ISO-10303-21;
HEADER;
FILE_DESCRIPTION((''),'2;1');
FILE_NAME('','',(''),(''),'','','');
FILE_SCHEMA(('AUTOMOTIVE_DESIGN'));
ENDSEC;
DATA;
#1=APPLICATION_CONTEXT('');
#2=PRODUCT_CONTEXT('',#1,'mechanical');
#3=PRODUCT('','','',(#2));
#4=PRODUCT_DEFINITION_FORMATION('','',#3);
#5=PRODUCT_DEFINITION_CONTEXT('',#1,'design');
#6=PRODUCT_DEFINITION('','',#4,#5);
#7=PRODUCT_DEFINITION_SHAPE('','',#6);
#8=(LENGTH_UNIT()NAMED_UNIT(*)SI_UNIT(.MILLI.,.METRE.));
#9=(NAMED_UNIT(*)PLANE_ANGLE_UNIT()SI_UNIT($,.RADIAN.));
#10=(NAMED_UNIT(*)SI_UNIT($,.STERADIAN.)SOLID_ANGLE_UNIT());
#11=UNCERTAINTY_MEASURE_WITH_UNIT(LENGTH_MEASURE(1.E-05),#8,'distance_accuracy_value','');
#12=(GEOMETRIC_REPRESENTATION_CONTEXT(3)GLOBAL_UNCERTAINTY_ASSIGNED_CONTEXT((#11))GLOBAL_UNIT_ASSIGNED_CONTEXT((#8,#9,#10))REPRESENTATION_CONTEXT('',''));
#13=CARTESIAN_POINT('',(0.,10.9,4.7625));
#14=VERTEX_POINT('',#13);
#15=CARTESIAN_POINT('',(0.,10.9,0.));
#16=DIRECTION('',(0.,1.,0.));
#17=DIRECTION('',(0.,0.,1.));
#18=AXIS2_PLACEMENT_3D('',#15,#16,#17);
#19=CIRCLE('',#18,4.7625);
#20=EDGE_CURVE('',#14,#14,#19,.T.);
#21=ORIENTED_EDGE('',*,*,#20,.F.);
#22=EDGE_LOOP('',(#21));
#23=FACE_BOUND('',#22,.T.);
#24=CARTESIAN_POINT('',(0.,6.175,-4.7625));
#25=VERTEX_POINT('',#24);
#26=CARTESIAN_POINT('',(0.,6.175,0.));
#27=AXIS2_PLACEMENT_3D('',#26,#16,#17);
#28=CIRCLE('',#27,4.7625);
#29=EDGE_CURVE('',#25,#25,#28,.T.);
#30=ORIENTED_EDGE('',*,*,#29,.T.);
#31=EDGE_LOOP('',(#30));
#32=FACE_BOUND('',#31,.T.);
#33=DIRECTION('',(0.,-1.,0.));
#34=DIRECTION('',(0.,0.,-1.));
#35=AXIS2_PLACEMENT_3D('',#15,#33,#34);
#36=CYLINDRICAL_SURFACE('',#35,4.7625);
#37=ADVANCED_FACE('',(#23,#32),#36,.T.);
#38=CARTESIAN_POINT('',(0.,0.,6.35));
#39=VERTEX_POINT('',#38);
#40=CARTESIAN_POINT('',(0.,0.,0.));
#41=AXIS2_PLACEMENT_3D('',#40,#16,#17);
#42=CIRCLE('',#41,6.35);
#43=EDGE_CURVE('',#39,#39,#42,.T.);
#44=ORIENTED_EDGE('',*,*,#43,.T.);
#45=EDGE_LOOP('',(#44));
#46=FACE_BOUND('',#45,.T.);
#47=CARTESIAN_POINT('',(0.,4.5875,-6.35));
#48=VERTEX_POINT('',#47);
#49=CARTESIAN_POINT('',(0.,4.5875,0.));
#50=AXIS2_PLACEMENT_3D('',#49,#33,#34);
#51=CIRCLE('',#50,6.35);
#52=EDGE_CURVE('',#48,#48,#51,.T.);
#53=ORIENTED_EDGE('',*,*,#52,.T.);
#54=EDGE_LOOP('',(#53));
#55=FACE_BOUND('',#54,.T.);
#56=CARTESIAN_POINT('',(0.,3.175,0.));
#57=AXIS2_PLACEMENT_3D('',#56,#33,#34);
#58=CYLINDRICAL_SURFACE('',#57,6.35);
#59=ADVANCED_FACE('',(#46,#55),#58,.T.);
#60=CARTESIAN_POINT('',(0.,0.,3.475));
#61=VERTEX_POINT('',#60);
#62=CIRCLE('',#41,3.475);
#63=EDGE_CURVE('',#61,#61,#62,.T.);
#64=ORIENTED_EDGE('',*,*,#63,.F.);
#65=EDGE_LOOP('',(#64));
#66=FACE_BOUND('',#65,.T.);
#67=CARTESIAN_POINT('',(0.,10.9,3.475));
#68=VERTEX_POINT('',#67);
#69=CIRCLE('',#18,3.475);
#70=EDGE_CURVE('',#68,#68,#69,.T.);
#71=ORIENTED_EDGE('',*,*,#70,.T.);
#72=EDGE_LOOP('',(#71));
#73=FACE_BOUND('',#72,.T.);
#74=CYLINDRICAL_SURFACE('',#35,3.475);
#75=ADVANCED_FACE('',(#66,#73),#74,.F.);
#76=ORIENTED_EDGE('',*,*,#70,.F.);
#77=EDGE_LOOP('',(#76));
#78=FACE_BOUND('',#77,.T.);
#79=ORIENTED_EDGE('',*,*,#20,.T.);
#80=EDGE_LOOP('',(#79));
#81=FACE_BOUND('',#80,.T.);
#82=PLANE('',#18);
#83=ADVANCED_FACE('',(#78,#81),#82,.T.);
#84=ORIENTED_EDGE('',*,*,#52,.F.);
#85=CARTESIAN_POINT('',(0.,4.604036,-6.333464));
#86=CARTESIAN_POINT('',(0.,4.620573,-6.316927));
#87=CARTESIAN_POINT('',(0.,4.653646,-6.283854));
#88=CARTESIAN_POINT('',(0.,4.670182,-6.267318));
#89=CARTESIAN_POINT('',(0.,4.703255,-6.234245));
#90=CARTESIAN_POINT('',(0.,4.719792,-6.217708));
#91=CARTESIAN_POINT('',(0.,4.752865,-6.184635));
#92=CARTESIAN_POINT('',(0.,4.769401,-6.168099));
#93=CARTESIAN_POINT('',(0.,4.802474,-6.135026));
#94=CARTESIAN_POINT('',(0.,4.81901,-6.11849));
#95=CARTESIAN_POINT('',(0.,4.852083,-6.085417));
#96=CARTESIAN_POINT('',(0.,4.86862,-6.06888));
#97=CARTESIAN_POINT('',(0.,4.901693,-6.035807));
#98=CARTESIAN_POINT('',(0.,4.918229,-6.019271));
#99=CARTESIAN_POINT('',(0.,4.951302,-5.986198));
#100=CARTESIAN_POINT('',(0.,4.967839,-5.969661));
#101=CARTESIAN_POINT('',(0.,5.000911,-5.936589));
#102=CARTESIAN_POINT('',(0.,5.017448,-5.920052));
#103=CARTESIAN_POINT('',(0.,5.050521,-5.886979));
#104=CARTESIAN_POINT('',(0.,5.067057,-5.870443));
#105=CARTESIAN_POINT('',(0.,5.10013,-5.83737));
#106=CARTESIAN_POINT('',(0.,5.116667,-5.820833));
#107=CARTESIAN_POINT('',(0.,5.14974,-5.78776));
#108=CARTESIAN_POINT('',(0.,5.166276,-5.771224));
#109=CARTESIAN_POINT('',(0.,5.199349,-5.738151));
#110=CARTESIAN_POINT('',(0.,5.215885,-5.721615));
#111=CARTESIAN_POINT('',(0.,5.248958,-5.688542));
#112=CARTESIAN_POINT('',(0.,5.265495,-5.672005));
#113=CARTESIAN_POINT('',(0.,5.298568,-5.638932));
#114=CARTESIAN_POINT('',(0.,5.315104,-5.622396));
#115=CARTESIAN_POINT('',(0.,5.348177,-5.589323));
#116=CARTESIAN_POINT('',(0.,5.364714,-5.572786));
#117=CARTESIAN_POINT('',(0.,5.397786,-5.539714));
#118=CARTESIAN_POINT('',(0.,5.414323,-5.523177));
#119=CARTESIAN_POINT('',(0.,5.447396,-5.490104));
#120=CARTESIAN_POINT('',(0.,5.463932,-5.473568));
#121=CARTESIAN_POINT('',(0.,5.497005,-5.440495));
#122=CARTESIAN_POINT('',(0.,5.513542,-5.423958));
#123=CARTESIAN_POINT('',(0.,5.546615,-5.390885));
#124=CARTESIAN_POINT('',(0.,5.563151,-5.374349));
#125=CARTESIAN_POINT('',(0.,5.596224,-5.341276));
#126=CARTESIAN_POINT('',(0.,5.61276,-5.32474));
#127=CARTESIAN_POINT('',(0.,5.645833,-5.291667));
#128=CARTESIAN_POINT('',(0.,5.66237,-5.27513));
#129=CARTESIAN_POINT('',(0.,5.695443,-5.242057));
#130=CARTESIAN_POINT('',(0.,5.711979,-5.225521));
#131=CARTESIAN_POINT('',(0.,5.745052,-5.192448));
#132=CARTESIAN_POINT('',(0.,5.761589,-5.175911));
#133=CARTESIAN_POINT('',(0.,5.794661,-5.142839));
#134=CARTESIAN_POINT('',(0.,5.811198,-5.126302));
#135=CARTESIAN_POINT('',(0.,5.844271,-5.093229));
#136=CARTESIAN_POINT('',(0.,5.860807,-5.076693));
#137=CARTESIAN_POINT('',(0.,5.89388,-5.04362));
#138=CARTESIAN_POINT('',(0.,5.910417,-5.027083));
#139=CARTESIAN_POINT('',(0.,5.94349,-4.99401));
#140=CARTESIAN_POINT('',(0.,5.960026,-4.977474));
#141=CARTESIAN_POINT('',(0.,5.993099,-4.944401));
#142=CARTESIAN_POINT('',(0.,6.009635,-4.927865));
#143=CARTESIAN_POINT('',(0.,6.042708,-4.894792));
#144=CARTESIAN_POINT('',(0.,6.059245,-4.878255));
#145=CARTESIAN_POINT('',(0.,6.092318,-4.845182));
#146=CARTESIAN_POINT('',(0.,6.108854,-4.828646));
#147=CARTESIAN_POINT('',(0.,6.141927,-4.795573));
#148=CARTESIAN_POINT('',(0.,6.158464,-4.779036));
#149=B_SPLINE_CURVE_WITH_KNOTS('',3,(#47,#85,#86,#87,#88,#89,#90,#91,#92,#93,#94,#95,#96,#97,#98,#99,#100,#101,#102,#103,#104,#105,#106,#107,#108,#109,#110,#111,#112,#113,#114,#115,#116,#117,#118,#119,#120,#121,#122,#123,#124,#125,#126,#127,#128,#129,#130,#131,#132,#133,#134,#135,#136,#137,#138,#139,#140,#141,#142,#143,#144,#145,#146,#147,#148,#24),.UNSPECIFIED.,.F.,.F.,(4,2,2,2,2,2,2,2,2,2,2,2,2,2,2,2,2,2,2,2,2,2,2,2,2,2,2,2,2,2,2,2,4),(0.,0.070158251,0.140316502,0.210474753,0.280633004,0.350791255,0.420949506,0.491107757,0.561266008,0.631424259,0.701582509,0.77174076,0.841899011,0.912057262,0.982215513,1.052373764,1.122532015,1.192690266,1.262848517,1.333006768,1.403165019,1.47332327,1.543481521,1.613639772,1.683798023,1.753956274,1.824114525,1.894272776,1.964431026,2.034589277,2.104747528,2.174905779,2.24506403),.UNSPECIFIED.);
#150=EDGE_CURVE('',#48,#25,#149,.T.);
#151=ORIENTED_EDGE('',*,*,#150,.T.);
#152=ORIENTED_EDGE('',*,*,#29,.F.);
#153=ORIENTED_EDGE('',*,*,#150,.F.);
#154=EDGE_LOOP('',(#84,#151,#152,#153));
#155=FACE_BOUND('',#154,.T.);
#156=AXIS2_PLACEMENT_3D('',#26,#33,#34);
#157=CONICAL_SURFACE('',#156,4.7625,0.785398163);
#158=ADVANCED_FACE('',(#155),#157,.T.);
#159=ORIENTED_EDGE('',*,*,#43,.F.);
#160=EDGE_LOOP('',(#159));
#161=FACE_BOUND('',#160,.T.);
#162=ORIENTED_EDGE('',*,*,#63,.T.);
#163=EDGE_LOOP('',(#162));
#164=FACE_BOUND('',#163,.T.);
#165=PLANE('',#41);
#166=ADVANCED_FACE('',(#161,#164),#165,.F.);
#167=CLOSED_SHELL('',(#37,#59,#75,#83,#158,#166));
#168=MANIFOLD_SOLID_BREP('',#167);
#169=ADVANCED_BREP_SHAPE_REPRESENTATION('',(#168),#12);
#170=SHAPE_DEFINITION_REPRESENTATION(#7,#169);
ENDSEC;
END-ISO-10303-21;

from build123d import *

# Parameters (mm, degrees)
SKETCH1_R           = 6.35
SKETCH1_R_2         = 4.7625
BOSS_EXTRUDE1_DEPTH = 3.175
SKETCH1_3_R         = 4.7625
SKETCH1_3_R_2       = 3.475
BOSS_EXTRUDE2_DEPTH = 10.9
CHAMFER1_SIZE       = 3


with BuildPart() as part:
    # Sketch1 → Boss-Extrude1 (new body)
    with BuildSketch(Plane(origin=(0, 0, 0), x_dir=(1, 0, 0), z_dir=(0, 1, 0))):
        with Locations(Location((0, 0, 0), (0, 0, 270))):
            Circle(SKETCH1_R)
        with Locations(Location((0, 0, 0), (0, 0, 270))):
            Circle(SKETCH1_R_2, mode=Mode.SUBTRACT)
    extrude(amount=BOSS_EXTRUDE1_DEPTH)

    # Sketch1<3> → Boss-Extrude2 (add)
    with BuildSketch(Plane(origin=(0, 0, 0), x_dir=(1, 0, 0), z_dir=(0, 1, 0))):
        with Locations(Location((0, 0, 0), (0, 0, 270))):
            Circle(SKETCH1_3_R)
        with Locations(Location((0, 0, 0), (0, 0, 270))):
            Circle(SKETCH1_3_R_2, mode=Mode.SUBTRACT)
    extrude(amount=BOSS_EXTRUDE2_DEPTH)

    # Chamfer1
    # the kernel refuses this chamfer: 3 mm, written as the material it adds along each edge
    with BuildSketch(Plane(origin=(0, 3.175, 0), x_dir=(0, 0, 1), z_dir=(-1, 0, 0))) as chamfer1_piece_1_section:
        Polygon((4.7625 + CHAMFER1_SIZE, 0), (4.7625, CHAMFER1_SIZE), (4.7625, 0), align=None)
    chamfer1_piece_1 = revolve(axis=Axis((0, 3.175, 0), (0, 1, 0)), mode=Mode.PRIVATE)
    chamfer1_piece_1 = chamfer1_piece_1 & Plane(origin=(0, 5.38786909, 0), x_dir=(0, 0, 1), z_dir=(0, -1, 0)) * Cylinder(6.35, 32, mode=Mode.PRIVATE)
    add(chamfer1_piece_1)


solid = part.part
